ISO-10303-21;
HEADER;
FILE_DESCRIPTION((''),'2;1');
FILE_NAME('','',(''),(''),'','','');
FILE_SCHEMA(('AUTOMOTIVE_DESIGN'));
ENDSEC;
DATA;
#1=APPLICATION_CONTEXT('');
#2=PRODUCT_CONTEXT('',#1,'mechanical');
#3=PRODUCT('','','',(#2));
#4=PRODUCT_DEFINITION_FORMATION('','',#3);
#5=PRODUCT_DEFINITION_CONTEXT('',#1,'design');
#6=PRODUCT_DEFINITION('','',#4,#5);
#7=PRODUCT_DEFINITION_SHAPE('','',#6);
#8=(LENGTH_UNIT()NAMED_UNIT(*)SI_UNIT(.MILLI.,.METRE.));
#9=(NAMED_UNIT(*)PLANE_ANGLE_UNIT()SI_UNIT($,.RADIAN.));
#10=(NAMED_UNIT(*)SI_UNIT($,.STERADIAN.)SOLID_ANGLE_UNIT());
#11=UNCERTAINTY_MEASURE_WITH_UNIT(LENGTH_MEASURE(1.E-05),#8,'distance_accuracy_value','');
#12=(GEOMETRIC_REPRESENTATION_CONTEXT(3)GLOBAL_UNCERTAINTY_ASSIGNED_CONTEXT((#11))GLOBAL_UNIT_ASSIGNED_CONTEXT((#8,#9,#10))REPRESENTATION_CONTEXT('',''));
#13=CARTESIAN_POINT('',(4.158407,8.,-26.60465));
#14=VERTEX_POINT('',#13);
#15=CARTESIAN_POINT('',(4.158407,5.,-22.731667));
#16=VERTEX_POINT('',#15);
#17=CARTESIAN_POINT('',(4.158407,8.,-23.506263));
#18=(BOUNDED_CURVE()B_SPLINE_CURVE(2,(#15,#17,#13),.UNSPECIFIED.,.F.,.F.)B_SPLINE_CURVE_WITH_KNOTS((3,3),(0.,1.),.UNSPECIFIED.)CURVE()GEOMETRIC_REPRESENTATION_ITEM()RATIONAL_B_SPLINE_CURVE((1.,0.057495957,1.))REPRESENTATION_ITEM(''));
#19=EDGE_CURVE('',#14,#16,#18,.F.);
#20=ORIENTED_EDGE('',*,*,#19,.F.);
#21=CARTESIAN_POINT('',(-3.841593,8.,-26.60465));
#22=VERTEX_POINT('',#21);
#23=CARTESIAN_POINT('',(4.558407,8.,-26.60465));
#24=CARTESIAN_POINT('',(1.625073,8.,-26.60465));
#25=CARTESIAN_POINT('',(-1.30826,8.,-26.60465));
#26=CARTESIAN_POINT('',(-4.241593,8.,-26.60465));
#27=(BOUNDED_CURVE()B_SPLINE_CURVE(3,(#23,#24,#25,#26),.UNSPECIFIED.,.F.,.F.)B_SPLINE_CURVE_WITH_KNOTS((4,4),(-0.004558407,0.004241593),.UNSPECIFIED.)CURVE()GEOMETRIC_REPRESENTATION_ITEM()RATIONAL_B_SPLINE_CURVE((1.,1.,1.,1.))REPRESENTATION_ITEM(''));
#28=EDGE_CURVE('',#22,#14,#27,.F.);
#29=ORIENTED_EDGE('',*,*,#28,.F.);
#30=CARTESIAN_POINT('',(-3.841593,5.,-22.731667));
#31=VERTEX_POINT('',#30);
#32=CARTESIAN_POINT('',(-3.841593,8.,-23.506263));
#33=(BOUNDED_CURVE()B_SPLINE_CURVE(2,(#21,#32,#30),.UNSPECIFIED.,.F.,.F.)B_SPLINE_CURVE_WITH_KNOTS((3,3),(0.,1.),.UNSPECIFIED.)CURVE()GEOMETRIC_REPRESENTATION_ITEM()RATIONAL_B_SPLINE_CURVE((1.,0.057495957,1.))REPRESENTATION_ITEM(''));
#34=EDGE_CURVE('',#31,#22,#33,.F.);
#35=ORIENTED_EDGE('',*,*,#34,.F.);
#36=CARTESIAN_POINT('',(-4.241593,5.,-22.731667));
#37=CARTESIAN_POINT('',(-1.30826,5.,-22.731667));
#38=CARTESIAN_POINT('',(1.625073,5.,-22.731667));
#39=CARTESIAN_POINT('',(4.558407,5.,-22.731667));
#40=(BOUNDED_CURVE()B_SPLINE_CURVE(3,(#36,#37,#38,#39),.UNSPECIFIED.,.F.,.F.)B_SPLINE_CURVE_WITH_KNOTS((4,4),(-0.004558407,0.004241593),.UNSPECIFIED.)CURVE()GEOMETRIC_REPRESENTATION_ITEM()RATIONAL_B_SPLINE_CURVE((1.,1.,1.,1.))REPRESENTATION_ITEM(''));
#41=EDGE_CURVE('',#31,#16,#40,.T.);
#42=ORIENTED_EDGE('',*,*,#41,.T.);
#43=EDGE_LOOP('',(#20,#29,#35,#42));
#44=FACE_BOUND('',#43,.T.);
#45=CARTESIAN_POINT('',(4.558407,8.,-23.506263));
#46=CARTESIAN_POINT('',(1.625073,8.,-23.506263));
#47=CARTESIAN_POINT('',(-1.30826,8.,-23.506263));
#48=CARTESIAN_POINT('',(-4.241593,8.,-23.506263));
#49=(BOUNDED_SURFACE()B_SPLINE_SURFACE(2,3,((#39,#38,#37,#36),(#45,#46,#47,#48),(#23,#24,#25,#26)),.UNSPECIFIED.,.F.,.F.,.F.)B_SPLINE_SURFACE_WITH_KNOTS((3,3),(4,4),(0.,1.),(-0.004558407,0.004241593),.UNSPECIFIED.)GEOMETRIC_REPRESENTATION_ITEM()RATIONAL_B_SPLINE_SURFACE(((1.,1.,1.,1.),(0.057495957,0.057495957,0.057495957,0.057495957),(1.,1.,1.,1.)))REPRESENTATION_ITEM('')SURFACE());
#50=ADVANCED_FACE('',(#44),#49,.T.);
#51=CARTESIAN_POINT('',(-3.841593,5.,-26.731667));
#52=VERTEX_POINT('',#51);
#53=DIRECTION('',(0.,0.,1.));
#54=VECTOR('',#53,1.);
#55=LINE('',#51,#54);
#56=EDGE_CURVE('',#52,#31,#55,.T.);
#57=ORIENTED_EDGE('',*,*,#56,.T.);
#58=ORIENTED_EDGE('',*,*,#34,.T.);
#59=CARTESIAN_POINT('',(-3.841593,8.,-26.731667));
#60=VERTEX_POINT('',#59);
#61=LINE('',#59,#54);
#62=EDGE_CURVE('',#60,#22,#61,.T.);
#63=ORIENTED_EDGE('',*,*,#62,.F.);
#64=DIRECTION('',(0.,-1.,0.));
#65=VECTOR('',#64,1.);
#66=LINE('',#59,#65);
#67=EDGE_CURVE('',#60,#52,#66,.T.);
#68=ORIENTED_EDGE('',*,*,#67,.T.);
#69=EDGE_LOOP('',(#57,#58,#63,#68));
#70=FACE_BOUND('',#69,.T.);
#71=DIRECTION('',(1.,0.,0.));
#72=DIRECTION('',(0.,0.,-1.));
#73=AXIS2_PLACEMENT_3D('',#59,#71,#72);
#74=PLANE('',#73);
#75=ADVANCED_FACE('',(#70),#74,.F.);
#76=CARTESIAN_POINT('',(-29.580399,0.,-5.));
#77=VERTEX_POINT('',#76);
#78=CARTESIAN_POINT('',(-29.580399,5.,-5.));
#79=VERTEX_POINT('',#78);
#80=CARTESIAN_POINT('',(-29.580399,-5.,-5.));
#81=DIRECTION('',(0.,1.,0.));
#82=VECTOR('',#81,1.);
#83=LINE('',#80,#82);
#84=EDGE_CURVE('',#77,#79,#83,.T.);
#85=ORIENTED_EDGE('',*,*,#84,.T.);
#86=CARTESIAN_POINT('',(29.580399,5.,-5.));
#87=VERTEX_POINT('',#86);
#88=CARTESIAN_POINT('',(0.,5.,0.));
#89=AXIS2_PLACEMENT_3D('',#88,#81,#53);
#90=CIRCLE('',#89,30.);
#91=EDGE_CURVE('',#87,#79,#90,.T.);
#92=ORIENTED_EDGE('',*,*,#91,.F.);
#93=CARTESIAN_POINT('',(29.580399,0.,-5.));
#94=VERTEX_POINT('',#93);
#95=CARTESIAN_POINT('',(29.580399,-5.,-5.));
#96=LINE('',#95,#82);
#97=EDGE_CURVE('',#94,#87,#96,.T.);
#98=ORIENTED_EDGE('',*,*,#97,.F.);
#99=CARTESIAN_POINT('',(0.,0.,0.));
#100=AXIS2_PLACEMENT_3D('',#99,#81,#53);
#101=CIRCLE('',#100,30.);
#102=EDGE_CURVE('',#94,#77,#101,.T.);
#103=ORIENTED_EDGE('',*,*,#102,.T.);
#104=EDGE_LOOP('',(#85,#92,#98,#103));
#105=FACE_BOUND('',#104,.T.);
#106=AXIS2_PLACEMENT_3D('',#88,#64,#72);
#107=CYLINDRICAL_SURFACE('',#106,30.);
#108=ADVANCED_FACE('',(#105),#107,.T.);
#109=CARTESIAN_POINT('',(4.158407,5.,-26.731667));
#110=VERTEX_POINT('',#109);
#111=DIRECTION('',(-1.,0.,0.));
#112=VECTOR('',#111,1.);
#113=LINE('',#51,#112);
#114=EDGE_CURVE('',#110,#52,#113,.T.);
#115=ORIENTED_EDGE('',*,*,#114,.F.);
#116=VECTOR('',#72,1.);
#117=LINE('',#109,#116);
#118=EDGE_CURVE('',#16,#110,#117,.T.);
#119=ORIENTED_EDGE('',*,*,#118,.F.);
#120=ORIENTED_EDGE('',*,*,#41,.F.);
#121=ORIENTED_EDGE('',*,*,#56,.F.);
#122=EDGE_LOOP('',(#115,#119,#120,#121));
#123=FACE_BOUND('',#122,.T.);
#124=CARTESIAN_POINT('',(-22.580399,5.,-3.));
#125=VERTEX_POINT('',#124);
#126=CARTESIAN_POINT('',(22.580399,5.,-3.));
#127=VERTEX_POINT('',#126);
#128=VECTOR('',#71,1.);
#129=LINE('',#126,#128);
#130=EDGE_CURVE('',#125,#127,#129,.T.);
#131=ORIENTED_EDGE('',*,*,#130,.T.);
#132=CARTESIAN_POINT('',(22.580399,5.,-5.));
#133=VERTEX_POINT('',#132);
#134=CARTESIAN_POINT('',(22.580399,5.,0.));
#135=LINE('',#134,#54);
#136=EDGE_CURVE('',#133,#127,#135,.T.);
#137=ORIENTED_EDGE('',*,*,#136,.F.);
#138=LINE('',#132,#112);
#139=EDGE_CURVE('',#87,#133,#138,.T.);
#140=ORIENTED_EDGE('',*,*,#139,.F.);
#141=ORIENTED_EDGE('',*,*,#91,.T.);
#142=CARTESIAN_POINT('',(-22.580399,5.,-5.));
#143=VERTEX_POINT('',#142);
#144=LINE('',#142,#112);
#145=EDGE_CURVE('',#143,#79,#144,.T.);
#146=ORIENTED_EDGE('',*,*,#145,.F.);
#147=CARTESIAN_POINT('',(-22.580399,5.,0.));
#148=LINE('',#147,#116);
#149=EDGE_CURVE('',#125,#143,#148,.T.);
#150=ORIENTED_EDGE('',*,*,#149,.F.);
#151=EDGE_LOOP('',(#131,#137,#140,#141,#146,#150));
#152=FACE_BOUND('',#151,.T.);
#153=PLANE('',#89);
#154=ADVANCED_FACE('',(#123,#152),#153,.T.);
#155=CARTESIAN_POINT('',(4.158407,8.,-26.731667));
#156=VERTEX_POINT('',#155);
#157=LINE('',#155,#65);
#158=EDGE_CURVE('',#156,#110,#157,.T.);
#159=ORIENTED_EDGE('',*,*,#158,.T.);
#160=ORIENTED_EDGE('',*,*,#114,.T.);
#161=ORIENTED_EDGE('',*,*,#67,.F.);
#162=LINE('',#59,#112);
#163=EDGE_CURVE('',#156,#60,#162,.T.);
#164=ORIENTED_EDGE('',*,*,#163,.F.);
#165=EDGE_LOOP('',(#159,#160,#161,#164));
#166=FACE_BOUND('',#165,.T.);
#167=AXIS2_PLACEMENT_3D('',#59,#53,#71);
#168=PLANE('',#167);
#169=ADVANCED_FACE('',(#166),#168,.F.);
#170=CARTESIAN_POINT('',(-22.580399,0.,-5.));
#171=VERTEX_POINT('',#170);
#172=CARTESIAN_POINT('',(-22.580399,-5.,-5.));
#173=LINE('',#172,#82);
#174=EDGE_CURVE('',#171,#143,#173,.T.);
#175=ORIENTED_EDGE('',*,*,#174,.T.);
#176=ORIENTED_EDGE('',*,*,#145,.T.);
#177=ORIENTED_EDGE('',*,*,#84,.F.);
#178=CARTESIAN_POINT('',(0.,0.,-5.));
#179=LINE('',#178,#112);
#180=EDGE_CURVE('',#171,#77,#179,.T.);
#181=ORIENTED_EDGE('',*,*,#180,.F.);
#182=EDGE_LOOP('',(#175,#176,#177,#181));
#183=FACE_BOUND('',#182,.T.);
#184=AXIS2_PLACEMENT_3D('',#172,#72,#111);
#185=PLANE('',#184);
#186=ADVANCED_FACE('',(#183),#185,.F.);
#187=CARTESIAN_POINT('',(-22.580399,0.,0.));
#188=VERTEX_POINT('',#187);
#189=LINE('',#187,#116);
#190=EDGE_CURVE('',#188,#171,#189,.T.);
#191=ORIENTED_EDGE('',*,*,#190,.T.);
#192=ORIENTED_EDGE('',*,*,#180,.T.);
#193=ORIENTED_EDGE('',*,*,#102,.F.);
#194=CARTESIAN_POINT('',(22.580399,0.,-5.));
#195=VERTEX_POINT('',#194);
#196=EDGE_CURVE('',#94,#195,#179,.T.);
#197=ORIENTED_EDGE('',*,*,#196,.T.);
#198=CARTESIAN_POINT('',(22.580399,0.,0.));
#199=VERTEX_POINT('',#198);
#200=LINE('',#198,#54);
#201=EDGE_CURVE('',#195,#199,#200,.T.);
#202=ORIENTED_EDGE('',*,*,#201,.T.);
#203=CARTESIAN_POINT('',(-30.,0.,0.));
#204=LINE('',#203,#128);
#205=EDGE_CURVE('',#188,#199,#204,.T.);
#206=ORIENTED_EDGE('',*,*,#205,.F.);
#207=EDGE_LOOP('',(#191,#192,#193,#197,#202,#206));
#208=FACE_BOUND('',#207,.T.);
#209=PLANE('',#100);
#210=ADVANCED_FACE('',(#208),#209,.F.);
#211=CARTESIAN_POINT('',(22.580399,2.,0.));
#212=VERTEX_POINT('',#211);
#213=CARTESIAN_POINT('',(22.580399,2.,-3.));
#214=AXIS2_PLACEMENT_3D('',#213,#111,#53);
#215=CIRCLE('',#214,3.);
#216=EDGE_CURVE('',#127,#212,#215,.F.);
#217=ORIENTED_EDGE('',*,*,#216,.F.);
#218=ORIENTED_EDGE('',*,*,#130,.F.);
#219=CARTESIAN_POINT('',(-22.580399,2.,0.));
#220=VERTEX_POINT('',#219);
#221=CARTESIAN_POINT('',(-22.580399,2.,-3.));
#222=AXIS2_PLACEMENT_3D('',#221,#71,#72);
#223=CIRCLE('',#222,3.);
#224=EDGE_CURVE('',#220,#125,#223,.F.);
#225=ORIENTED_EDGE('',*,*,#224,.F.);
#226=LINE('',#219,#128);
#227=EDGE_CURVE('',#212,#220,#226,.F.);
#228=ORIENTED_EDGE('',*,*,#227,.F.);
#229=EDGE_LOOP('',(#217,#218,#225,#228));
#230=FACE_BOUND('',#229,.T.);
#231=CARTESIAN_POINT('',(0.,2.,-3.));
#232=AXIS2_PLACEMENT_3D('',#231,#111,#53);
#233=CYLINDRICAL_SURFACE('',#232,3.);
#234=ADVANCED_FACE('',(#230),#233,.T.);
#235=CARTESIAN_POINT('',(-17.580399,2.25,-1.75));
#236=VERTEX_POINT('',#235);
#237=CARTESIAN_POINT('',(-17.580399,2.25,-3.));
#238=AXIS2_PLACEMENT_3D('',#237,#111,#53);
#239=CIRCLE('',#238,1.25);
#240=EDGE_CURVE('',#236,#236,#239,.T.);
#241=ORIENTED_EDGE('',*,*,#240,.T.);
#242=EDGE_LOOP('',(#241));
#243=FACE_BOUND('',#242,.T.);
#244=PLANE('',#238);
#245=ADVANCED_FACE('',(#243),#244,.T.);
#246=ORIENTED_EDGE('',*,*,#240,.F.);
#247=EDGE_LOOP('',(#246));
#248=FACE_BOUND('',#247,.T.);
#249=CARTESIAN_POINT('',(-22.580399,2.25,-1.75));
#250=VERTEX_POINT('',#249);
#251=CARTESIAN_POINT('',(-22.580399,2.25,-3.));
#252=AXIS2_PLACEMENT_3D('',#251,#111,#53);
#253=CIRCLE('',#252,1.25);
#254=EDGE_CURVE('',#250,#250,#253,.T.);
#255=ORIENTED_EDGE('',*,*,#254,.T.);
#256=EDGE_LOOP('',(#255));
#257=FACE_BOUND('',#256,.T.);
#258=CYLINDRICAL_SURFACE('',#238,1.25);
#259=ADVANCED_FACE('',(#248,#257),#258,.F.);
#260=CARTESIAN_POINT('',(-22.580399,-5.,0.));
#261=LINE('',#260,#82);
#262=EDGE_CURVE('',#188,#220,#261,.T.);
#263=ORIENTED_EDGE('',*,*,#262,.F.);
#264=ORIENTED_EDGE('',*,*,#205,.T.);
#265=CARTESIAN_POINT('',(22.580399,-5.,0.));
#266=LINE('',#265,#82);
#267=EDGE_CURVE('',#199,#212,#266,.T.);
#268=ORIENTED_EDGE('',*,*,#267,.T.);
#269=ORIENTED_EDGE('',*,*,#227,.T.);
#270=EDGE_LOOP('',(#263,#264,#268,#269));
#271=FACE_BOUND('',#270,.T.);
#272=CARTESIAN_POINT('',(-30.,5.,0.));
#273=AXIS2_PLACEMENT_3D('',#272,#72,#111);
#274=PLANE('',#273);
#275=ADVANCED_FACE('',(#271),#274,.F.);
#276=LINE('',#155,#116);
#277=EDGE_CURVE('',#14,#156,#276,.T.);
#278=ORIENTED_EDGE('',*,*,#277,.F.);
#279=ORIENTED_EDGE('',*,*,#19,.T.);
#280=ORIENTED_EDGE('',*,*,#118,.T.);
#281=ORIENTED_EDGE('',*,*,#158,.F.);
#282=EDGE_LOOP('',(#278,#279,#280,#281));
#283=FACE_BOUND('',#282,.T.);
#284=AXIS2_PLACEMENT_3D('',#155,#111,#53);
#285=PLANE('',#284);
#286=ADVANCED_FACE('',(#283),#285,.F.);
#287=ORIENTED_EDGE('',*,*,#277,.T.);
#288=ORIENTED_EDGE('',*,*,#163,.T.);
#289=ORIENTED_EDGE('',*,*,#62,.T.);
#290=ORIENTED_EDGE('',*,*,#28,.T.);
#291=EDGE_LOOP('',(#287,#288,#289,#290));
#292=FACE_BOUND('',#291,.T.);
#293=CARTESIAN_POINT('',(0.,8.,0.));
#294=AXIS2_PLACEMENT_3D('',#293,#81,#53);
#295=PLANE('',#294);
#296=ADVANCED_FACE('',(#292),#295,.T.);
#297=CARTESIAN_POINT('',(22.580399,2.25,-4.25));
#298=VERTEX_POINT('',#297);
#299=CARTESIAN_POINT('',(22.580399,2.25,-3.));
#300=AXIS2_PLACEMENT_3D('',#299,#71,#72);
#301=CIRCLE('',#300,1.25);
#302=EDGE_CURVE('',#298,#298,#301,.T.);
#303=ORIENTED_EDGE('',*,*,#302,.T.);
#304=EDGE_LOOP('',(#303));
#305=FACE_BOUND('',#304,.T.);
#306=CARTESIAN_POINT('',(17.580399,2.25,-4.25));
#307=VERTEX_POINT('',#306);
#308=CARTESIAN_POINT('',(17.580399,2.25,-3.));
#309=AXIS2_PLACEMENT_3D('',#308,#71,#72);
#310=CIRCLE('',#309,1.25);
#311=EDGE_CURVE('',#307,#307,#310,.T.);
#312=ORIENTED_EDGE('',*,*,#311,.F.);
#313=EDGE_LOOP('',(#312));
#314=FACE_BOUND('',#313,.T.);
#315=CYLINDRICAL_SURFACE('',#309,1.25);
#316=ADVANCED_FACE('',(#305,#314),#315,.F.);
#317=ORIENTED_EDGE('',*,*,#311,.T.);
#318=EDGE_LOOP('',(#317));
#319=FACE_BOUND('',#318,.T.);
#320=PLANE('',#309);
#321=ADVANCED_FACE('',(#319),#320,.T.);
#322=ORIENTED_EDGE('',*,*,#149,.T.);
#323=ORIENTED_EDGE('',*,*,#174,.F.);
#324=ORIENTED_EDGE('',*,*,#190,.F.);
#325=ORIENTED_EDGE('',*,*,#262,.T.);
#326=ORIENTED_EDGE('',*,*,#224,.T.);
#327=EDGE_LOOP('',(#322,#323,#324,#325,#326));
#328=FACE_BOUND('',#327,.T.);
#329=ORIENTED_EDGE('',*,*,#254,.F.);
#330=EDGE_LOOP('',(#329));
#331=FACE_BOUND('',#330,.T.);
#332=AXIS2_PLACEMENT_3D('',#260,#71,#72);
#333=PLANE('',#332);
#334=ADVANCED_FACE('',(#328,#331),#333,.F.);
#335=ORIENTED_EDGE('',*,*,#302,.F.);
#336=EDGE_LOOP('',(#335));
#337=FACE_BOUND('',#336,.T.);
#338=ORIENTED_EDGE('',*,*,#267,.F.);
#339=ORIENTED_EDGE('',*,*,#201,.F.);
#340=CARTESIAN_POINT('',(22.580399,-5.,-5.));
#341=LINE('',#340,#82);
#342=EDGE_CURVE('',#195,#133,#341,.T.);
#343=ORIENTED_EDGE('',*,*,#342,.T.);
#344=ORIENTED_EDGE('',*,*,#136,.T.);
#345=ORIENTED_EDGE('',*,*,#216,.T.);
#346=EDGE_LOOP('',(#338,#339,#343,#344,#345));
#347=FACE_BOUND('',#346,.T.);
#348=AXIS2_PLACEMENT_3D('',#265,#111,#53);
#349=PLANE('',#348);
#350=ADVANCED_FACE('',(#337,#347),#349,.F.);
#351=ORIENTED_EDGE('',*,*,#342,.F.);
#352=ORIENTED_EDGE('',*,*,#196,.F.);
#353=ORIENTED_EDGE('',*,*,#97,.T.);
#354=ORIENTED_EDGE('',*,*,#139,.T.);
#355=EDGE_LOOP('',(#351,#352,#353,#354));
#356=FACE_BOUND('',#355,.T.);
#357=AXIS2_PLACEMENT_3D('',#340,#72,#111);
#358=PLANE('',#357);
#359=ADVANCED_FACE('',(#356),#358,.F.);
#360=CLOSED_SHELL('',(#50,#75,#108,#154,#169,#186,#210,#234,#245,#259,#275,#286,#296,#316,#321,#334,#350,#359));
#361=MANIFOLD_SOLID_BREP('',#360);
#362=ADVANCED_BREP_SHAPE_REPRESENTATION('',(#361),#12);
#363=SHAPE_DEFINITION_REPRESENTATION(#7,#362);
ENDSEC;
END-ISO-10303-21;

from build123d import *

# Parameters (mm, degrees)
BOSS_EXTRUDE1_DEPTH = 5
SKETCH3_W           = 8
SKETCH3_H           = 4
BOSS_EXTRUDE2_DEPTH = 3
FILLET1_START       = -3.841593316
FILLET1_DEPTH       = 8
CUT_EXTRUDE1_START  = -10
CUT_EXTRUDE1_DEPTH  = 10
FILLET2_R           = 3
SKETCH6_R           = 1.25
CUT_EXTRUDE2_DEPTH  = 5
CUT_EXTRUDE3_START  = -5
SKETCH7_R           = 1.25
CUT_EXTRUDE3_DEPTH  = 5


with BuildPart() as part:
    # Sketch1 → Boss-Extrude1 (new body)
    with BuildSketch(Plane(origin=(0, 0, 0), x_dir=(1, 0, 0), z_dir=(0, 1, 0))):
        with BuildLine():
            Line((-30, 0), (30, 0))
            ThreePointArc((30, 0), (0, 30), (-30, 0))
        make_face()
    extrude(amount=BOSS_EXTRUDE1_DEPTH)

    # Sketch3 → Boss-Extrude2 (add)
    with BuildSketch(Plane(origin=(0, 5, 0), x_dir=(1, 0, 0), z_dir=(0, 1, 0))):
        with Locations((0.158406684, 24.731666579)):
            Rectangle(SKETCH3_W, SKETCH3_H)
    extrude(amount=BOSS_EXTRUDE2_DEPTH)

    # Fillet1: read off the stored shape, not the designer's step
    # Fillet1 outline → Fillet1 (cut)
    with BuildSketch(Plane.YZ.offset(FILLET1_START)):
        with BuildLine():
            Line((8, -22.731666579), (5, -22.731666579))
            add(Edge.make_bspline(
                [(5, -22.731666579), (8, -23.506263249), (8, -26.604649926)],
                knots=[0, 0, 0, 1, 1, 1], degree=2, weights=[1, 0.057495957, 1]))
            Line((8, -26.604649926), (8, -22.731666579))
        make_face()
    extrude(amount=FILLET1_DEPTH, mode=Mode.SUBTRACT)

    # Sketch5 → Cut-Extrude1 (cut)
    with BuildSketch(Plane(origin=(0, 5, 0), x_dir=(1, 0, 0), z_dir=(0, 1, 0)).offset(CUT_EXTRUDE1_START)):
        with BuildLine():
            Line((-22.580398915, 0), (-22.580398915, 5))
            Line((-22.580398915, 5), (-29.580398915, 5))
            ThreePointArc((-29.580398915, 5), (-29.894915684, 2.508787808), (-30, 0))
            Line((-30, 0), (-22.580398915, 0))
        make_face()
        with BuildLine():
            Line((22.580398915, 5), (29.580398915, 5))
            ThreePointArc((29.580398915, 5), (29.894915684, 2.508787808), (30, 0))
            Line((30, 0), (22.580398915, 0))
            Line((22.580398915, 0), (22.580398915, 5))
        make_face()
    extrude(amount=CUT_EXTRUDE1_DEPTH, mode=Mode.SUBTRACT)

    # Fillet2
    fillet2_edges = [part.edges().sort_by_distance(p)[0] for p in [
        (0, 5, 0),
    ]]
    fillet(fillet2_edges, radius=FILLET2_R)

    # Sketch6 → Cut-Extrude2 (cut)
    with BuildSketch(Plane(origin=(22.580398915, 0, 0), x_dir=(0, 0, -1), z_dir=(1, 0, 0))):
        with Locations((3, 2.25)):
            Circle(SKETCH6_R)
    extrude(amount=-CUT_EXTRUDE2_DEPTH, mode=Mode.SUBTRACT)

    # Sketch7 → Cut-Extrude3 (cut)
    with BuildSketch(Plane.ZY.offset(22.580398915).offset(CUT_EXTRUDE3_START)):
        with Locations(Location((-3, 2.25, 0), (0, 0, 180))):
            Circle(SKETCH7_R)
    extrude(amount=CUT_EXTRUDE3_DEPTH, mode=Mode.SUBTRACT)


solid = part.part
